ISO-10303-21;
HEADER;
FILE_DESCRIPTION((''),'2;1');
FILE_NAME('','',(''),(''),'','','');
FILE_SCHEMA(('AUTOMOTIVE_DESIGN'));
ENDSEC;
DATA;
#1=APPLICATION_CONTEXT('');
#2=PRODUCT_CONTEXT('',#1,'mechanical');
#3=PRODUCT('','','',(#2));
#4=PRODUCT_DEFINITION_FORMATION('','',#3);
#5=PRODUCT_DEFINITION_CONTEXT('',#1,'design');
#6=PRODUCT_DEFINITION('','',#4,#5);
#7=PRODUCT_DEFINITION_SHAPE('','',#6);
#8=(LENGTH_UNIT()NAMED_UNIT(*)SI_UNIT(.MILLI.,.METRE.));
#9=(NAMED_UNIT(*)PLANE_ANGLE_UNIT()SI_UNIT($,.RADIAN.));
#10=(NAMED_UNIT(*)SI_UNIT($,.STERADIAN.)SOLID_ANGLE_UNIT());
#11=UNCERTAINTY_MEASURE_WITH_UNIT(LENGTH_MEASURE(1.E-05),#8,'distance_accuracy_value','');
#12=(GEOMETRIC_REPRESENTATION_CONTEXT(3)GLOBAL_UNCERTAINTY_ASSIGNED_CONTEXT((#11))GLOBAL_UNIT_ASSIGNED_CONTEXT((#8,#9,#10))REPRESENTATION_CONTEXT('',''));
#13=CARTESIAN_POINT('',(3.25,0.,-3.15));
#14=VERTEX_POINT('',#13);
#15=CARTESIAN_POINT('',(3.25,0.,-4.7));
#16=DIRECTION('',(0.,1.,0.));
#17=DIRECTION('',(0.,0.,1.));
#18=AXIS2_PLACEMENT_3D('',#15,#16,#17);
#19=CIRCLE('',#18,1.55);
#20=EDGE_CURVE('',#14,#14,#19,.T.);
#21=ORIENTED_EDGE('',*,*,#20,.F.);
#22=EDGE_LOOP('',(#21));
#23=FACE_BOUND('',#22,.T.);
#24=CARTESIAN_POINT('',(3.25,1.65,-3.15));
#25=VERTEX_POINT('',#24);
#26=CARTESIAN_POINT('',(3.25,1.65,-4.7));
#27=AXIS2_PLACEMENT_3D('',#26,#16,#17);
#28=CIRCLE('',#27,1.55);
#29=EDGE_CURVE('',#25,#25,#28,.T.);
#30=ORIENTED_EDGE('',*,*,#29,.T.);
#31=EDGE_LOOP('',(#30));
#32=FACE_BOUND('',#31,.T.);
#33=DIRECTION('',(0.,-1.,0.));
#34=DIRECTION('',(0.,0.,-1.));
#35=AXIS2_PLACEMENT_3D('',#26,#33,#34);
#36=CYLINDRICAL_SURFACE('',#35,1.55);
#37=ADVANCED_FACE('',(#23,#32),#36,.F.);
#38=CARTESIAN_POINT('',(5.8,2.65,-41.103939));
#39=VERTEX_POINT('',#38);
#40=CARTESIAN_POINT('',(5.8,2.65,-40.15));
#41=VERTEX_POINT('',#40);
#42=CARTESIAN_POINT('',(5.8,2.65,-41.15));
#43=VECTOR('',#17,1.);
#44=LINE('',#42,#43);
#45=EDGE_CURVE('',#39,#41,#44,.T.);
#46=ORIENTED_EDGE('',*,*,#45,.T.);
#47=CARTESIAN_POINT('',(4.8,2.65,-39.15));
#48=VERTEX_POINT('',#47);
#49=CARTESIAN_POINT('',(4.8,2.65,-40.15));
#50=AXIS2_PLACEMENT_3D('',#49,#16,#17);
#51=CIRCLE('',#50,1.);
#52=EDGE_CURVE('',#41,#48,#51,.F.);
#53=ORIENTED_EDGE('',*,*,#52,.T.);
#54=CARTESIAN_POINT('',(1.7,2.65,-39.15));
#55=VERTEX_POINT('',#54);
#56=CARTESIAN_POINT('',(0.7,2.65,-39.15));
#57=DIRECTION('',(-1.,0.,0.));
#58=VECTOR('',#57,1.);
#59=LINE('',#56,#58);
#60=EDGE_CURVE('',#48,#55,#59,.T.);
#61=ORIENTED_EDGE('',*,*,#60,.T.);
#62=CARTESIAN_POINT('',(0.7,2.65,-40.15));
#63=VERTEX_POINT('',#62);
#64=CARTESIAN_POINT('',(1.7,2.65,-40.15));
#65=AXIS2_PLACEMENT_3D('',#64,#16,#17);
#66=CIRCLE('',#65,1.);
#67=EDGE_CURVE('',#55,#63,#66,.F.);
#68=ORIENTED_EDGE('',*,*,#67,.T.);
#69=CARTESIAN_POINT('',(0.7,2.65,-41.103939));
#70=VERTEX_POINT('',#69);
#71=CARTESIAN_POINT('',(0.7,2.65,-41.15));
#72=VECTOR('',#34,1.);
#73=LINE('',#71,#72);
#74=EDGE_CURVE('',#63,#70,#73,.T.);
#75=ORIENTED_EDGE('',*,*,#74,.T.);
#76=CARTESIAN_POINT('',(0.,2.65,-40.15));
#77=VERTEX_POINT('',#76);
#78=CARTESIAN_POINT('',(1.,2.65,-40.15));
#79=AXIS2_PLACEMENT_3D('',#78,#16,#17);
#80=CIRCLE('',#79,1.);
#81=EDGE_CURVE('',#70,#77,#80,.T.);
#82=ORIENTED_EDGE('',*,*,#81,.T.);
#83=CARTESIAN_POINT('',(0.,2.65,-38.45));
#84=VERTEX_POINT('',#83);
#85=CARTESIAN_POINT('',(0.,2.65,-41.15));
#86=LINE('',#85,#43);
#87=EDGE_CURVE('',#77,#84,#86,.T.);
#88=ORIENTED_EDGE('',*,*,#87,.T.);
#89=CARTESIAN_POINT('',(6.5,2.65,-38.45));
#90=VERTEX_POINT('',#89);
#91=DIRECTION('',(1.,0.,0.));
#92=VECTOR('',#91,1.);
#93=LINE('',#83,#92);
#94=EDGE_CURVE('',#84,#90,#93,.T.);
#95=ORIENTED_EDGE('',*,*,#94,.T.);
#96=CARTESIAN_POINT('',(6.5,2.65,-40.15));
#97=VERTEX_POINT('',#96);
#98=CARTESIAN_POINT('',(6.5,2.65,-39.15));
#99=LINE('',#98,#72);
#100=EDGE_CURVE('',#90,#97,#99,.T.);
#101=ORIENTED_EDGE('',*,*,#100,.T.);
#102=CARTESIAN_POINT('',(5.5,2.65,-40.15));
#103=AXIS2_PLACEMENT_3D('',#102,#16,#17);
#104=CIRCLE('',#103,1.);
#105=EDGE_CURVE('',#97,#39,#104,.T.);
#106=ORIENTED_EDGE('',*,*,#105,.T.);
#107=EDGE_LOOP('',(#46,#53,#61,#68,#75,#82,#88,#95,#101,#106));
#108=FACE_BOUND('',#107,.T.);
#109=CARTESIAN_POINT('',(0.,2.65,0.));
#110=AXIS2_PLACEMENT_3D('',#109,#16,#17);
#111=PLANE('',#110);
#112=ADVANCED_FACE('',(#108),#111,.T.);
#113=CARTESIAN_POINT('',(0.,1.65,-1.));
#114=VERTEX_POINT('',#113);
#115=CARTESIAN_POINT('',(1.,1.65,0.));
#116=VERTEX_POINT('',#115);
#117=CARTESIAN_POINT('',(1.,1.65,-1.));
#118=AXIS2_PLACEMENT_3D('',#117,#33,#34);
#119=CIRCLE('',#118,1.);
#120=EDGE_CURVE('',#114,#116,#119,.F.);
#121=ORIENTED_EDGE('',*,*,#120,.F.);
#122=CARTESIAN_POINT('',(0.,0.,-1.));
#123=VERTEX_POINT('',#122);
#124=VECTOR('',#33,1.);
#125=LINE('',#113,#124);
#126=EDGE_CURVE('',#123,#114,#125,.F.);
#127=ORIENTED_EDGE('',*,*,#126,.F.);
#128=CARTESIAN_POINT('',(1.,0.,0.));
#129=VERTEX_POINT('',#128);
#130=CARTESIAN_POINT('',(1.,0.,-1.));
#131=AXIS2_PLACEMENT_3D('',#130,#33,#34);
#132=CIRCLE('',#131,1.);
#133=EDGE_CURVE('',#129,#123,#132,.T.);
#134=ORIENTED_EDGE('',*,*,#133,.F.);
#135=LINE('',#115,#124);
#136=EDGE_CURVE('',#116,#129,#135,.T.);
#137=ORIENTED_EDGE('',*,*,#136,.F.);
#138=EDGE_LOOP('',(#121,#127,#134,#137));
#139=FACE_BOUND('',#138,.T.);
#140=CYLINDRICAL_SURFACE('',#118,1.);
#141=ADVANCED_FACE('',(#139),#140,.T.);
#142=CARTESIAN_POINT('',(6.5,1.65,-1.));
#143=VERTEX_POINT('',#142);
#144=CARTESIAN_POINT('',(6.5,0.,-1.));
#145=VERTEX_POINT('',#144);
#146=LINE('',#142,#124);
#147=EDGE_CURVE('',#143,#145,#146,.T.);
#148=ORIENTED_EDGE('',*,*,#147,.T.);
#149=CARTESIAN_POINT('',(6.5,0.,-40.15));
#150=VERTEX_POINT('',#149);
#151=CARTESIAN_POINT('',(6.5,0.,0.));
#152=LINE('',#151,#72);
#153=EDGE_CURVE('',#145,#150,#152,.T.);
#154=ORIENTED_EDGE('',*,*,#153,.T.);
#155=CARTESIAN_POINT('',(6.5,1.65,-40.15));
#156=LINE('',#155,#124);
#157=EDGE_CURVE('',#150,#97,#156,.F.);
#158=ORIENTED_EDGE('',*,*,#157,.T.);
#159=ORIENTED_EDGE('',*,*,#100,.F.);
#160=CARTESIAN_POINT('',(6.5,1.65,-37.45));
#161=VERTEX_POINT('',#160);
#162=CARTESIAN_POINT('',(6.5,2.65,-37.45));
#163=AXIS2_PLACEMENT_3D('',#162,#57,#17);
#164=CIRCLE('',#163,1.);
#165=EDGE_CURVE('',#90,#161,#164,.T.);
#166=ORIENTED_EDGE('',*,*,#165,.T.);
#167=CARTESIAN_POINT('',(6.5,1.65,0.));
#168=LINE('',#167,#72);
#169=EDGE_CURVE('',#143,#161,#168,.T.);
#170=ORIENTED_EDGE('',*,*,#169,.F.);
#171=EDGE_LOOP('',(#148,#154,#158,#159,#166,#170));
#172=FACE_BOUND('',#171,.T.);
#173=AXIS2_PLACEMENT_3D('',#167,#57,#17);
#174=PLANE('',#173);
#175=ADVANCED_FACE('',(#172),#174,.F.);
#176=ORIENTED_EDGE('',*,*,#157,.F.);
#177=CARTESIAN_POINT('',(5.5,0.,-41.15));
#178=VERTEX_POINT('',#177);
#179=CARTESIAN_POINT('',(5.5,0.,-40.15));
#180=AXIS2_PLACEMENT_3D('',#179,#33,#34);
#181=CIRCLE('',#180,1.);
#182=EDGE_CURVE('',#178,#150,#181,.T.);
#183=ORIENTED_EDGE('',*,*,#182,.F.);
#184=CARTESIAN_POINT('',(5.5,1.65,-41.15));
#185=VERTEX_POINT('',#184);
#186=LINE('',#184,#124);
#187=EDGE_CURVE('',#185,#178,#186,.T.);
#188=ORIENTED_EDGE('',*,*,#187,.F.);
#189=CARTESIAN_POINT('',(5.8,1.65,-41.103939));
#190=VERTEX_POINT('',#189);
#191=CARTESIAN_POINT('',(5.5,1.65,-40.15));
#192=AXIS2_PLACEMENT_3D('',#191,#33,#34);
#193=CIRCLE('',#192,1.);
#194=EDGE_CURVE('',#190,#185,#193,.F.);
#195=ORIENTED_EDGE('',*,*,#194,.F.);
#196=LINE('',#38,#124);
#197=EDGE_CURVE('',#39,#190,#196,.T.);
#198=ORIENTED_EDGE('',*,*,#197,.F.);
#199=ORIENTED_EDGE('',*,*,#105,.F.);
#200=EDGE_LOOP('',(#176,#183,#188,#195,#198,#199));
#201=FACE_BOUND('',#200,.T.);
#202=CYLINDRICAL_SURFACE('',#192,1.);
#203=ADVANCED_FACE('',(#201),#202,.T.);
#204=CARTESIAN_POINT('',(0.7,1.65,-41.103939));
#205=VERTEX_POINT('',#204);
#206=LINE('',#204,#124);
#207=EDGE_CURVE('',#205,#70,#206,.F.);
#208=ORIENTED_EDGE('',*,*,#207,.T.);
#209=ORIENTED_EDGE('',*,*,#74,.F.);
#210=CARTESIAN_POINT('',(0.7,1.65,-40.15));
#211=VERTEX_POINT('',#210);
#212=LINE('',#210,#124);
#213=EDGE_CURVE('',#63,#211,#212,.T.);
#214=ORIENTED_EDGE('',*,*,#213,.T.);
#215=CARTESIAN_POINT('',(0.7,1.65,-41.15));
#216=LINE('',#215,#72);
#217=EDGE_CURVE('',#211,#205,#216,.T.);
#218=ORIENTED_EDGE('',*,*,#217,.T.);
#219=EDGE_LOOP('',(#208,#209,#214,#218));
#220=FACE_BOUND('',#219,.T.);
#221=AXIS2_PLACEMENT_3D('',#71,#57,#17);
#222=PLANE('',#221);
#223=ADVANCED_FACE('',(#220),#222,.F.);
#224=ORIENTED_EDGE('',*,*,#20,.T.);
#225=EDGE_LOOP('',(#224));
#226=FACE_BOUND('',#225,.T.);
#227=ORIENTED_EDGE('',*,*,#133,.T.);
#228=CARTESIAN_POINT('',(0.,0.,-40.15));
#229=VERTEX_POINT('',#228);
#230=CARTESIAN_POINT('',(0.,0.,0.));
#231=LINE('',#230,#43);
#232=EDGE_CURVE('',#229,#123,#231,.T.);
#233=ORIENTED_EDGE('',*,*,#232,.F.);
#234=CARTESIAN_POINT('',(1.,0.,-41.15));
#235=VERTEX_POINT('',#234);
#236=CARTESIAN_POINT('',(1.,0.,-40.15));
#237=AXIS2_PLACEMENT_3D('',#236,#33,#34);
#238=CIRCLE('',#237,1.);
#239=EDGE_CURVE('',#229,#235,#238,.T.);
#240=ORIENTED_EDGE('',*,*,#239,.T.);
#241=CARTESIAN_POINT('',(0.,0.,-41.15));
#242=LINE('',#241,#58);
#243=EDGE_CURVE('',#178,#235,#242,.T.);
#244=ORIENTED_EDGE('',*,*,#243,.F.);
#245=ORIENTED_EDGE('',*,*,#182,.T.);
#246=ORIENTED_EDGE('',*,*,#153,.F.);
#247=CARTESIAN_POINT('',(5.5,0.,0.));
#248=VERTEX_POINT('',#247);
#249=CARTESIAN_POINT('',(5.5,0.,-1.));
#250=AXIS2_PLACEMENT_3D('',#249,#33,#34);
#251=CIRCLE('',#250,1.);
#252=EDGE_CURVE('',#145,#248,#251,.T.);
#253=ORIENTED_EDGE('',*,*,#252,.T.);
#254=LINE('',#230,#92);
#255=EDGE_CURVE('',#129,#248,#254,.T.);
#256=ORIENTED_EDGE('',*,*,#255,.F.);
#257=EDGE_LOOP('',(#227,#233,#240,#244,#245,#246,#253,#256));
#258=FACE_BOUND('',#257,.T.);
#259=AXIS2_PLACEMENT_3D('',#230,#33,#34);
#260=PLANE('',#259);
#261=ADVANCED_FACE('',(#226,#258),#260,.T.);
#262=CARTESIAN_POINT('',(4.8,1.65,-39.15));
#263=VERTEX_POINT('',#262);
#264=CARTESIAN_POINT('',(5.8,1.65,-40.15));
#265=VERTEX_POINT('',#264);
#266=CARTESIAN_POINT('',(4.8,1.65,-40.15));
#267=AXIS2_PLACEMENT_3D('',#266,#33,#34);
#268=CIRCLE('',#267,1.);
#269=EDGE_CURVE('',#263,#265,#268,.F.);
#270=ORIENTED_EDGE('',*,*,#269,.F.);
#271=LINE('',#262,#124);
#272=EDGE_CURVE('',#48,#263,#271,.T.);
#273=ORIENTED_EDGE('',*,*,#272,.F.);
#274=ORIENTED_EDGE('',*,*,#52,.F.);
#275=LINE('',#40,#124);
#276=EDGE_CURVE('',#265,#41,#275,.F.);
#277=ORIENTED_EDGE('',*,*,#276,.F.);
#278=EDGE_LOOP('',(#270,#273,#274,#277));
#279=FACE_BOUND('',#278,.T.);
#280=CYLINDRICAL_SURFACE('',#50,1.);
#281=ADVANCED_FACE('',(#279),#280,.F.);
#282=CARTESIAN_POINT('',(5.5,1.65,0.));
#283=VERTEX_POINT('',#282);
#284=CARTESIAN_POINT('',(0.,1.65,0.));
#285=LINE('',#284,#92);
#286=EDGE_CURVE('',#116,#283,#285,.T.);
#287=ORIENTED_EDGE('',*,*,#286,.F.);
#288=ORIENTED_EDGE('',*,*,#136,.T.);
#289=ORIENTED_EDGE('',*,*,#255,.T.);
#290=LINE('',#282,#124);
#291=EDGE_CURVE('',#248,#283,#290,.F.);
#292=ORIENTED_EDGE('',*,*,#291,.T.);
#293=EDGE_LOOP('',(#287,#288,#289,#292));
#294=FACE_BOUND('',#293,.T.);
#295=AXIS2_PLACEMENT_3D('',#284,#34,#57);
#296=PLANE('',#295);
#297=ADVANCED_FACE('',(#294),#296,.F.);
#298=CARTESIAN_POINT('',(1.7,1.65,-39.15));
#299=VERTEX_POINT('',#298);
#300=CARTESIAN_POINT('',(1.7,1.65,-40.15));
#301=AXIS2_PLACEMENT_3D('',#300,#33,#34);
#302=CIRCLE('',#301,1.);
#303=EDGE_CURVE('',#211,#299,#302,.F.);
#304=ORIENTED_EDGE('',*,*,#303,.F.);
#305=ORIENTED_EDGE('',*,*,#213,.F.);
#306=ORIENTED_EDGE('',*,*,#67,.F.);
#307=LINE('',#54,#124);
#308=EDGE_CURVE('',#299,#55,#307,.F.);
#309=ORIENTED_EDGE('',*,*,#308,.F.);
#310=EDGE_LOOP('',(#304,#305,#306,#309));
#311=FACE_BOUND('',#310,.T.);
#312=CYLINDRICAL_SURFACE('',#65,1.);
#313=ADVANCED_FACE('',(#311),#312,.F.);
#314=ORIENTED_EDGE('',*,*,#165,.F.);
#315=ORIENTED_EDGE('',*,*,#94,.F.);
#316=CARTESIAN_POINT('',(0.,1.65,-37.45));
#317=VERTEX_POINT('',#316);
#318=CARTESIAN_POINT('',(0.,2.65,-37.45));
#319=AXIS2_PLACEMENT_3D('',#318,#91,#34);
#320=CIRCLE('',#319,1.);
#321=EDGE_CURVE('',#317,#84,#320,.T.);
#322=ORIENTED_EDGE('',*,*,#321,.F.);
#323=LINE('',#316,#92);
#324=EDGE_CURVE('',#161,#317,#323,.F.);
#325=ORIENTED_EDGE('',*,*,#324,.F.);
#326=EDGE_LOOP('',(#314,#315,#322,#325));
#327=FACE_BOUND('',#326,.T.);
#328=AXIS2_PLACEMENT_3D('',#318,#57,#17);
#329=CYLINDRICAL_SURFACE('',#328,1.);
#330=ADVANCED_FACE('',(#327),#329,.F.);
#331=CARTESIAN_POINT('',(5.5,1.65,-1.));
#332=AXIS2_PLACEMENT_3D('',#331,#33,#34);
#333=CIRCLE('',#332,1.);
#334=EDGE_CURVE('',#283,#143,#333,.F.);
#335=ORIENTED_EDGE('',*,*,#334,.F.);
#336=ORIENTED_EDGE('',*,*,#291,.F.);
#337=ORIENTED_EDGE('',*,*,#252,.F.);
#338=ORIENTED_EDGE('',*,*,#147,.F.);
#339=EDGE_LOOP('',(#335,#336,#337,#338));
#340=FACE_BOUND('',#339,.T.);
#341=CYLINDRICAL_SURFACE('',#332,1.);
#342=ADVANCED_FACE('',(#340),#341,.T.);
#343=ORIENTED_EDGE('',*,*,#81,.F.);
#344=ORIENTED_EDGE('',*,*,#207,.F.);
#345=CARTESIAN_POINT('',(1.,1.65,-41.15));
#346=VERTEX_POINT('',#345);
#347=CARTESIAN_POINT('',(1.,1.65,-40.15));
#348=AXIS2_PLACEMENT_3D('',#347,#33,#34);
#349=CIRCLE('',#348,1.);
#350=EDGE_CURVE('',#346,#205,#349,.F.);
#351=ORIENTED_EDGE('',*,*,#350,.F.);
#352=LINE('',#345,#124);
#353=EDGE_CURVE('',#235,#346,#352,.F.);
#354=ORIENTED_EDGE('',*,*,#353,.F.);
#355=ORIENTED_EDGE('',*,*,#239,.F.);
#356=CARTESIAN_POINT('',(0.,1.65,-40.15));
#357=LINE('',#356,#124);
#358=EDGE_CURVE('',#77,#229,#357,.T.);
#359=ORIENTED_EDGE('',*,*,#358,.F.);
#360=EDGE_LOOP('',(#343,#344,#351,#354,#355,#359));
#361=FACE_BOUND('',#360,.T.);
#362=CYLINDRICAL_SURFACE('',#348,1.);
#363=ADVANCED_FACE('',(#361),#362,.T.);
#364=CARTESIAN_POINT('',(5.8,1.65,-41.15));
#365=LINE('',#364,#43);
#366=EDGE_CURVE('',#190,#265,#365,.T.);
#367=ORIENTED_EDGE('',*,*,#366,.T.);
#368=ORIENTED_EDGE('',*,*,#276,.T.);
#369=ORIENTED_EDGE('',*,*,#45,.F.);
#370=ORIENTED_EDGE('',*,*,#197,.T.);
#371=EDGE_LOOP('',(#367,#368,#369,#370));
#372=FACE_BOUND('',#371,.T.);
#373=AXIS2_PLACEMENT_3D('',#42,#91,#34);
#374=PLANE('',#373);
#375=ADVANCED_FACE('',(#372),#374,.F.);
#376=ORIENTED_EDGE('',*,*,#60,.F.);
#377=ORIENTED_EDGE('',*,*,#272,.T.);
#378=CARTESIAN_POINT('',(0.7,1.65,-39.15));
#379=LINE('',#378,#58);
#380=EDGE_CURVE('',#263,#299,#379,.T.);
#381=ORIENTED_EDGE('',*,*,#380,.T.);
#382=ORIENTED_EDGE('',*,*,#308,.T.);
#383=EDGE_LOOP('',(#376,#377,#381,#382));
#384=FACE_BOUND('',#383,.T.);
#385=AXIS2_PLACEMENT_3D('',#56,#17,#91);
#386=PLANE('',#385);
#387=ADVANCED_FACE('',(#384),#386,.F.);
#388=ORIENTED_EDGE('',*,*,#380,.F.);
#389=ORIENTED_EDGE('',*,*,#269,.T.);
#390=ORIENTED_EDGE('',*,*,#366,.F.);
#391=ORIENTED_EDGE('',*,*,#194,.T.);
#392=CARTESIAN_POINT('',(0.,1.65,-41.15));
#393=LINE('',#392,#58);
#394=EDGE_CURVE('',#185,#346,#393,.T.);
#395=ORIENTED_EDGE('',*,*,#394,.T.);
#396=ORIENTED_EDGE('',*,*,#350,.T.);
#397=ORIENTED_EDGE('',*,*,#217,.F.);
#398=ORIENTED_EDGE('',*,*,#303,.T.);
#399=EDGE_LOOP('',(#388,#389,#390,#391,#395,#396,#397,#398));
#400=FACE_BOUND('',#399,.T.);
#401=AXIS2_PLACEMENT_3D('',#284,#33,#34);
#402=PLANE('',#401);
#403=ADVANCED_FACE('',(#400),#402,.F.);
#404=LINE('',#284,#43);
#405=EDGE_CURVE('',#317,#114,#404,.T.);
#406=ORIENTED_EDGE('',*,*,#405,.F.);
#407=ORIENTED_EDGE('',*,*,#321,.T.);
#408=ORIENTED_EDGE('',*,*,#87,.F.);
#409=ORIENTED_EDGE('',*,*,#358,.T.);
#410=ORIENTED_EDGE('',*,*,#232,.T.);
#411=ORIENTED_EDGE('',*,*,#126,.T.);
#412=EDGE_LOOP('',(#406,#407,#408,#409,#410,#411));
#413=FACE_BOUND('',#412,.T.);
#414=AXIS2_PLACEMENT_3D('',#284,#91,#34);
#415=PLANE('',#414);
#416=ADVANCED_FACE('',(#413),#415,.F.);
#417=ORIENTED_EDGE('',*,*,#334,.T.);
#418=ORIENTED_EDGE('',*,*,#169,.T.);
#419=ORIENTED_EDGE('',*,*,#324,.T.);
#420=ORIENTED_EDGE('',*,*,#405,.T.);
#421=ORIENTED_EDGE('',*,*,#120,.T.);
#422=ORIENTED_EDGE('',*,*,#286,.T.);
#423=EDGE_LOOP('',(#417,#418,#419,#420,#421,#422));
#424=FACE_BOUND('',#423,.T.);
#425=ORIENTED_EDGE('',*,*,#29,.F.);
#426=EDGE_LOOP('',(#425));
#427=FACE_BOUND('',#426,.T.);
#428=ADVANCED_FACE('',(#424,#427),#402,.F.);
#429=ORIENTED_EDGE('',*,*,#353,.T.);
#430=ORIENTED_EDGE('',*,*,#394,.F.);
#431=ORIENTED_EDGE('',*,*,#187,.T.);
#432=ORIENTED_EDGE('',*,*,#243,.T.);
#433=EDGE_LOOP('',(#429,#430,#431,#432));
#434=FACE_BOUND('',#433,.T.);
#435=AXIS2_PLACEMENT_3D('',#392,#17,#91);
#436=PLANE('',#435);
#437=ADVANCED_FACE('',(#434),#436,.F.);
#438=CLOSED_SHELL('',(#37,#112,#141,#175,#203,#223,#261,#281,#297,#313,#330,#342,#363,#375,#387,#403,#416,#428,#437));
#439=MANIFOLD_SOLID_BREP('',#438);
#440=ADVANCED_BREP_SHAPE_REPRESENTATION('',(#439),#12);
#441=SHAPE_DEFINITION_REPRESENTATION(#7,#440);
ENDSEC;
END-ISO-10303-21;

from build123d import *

# Parameters (mm, degrees)
SKETCH1_W           = 6.5
SKETCH1_H           = 41.15
SKETCH1_R           = 1.55
BOSS_EXTRUDE1_DEPTH = 1.65
BOSS_EXTRUDE2_DEPTH = 1
FILLET1_R           = 1


with BuildPart() as part:
    # Sketch1 → Boss-Extrude1 (new body)
    with BuildSketch(Plane(origin=(0, 0, 0), x_dir=(1, 0, 0), z_dir=(0, 1, 0))):
        with Locations((3.25, 20.575)):
            Rectangle(SKETCH1_W, SKETCH1_H)
        with Locations(Location((3.25, 4.7, 0), (0, 0, 270))):
            Circle(SKETCH1_R, mode=Mode.SUBTRACT)
    extrude(amount=BOSS_EXTRUDE1_DEPTH)

    # Sketch2 → Boss-Extrude2 (add)
    with BuildSketch(Plane(origin=(0, 1.65, 0), x_dir=(1, 0, 0), z_dir=(0, 1, 0))):
        Polygon((0, 41.15), (0.7, 41.15), (0.7, 39.15), (5.8, 39.15), (5.8, 41.15), (6.5, 41.15), (6.5, 39.15), (6.5, 38.45), (0, 38.45), (0, 39.15), align=None)
    extrude(amount=BOSS_EXTRUDE2_DEPTH)

    # Fillet1
    fillet1_edges = [part.edges().sort_by_distance(p)[0] for p in [
        (6.5, 1.325, -41.15),
        (0, 1.325, -41.15),
        (6.5, 0.825, 0),
        (0, 0.825, 0),
        (3.25, 1.65, -38.45),
        (0.7, 2.15, -39.15),
        (5.8, 2.15, -39.15),
    ]]
    fillet(fillet1_edges, radius=FILLET1_R - 0.0001)  # a hair under: the kernel refuses the full size


solid = part.part
